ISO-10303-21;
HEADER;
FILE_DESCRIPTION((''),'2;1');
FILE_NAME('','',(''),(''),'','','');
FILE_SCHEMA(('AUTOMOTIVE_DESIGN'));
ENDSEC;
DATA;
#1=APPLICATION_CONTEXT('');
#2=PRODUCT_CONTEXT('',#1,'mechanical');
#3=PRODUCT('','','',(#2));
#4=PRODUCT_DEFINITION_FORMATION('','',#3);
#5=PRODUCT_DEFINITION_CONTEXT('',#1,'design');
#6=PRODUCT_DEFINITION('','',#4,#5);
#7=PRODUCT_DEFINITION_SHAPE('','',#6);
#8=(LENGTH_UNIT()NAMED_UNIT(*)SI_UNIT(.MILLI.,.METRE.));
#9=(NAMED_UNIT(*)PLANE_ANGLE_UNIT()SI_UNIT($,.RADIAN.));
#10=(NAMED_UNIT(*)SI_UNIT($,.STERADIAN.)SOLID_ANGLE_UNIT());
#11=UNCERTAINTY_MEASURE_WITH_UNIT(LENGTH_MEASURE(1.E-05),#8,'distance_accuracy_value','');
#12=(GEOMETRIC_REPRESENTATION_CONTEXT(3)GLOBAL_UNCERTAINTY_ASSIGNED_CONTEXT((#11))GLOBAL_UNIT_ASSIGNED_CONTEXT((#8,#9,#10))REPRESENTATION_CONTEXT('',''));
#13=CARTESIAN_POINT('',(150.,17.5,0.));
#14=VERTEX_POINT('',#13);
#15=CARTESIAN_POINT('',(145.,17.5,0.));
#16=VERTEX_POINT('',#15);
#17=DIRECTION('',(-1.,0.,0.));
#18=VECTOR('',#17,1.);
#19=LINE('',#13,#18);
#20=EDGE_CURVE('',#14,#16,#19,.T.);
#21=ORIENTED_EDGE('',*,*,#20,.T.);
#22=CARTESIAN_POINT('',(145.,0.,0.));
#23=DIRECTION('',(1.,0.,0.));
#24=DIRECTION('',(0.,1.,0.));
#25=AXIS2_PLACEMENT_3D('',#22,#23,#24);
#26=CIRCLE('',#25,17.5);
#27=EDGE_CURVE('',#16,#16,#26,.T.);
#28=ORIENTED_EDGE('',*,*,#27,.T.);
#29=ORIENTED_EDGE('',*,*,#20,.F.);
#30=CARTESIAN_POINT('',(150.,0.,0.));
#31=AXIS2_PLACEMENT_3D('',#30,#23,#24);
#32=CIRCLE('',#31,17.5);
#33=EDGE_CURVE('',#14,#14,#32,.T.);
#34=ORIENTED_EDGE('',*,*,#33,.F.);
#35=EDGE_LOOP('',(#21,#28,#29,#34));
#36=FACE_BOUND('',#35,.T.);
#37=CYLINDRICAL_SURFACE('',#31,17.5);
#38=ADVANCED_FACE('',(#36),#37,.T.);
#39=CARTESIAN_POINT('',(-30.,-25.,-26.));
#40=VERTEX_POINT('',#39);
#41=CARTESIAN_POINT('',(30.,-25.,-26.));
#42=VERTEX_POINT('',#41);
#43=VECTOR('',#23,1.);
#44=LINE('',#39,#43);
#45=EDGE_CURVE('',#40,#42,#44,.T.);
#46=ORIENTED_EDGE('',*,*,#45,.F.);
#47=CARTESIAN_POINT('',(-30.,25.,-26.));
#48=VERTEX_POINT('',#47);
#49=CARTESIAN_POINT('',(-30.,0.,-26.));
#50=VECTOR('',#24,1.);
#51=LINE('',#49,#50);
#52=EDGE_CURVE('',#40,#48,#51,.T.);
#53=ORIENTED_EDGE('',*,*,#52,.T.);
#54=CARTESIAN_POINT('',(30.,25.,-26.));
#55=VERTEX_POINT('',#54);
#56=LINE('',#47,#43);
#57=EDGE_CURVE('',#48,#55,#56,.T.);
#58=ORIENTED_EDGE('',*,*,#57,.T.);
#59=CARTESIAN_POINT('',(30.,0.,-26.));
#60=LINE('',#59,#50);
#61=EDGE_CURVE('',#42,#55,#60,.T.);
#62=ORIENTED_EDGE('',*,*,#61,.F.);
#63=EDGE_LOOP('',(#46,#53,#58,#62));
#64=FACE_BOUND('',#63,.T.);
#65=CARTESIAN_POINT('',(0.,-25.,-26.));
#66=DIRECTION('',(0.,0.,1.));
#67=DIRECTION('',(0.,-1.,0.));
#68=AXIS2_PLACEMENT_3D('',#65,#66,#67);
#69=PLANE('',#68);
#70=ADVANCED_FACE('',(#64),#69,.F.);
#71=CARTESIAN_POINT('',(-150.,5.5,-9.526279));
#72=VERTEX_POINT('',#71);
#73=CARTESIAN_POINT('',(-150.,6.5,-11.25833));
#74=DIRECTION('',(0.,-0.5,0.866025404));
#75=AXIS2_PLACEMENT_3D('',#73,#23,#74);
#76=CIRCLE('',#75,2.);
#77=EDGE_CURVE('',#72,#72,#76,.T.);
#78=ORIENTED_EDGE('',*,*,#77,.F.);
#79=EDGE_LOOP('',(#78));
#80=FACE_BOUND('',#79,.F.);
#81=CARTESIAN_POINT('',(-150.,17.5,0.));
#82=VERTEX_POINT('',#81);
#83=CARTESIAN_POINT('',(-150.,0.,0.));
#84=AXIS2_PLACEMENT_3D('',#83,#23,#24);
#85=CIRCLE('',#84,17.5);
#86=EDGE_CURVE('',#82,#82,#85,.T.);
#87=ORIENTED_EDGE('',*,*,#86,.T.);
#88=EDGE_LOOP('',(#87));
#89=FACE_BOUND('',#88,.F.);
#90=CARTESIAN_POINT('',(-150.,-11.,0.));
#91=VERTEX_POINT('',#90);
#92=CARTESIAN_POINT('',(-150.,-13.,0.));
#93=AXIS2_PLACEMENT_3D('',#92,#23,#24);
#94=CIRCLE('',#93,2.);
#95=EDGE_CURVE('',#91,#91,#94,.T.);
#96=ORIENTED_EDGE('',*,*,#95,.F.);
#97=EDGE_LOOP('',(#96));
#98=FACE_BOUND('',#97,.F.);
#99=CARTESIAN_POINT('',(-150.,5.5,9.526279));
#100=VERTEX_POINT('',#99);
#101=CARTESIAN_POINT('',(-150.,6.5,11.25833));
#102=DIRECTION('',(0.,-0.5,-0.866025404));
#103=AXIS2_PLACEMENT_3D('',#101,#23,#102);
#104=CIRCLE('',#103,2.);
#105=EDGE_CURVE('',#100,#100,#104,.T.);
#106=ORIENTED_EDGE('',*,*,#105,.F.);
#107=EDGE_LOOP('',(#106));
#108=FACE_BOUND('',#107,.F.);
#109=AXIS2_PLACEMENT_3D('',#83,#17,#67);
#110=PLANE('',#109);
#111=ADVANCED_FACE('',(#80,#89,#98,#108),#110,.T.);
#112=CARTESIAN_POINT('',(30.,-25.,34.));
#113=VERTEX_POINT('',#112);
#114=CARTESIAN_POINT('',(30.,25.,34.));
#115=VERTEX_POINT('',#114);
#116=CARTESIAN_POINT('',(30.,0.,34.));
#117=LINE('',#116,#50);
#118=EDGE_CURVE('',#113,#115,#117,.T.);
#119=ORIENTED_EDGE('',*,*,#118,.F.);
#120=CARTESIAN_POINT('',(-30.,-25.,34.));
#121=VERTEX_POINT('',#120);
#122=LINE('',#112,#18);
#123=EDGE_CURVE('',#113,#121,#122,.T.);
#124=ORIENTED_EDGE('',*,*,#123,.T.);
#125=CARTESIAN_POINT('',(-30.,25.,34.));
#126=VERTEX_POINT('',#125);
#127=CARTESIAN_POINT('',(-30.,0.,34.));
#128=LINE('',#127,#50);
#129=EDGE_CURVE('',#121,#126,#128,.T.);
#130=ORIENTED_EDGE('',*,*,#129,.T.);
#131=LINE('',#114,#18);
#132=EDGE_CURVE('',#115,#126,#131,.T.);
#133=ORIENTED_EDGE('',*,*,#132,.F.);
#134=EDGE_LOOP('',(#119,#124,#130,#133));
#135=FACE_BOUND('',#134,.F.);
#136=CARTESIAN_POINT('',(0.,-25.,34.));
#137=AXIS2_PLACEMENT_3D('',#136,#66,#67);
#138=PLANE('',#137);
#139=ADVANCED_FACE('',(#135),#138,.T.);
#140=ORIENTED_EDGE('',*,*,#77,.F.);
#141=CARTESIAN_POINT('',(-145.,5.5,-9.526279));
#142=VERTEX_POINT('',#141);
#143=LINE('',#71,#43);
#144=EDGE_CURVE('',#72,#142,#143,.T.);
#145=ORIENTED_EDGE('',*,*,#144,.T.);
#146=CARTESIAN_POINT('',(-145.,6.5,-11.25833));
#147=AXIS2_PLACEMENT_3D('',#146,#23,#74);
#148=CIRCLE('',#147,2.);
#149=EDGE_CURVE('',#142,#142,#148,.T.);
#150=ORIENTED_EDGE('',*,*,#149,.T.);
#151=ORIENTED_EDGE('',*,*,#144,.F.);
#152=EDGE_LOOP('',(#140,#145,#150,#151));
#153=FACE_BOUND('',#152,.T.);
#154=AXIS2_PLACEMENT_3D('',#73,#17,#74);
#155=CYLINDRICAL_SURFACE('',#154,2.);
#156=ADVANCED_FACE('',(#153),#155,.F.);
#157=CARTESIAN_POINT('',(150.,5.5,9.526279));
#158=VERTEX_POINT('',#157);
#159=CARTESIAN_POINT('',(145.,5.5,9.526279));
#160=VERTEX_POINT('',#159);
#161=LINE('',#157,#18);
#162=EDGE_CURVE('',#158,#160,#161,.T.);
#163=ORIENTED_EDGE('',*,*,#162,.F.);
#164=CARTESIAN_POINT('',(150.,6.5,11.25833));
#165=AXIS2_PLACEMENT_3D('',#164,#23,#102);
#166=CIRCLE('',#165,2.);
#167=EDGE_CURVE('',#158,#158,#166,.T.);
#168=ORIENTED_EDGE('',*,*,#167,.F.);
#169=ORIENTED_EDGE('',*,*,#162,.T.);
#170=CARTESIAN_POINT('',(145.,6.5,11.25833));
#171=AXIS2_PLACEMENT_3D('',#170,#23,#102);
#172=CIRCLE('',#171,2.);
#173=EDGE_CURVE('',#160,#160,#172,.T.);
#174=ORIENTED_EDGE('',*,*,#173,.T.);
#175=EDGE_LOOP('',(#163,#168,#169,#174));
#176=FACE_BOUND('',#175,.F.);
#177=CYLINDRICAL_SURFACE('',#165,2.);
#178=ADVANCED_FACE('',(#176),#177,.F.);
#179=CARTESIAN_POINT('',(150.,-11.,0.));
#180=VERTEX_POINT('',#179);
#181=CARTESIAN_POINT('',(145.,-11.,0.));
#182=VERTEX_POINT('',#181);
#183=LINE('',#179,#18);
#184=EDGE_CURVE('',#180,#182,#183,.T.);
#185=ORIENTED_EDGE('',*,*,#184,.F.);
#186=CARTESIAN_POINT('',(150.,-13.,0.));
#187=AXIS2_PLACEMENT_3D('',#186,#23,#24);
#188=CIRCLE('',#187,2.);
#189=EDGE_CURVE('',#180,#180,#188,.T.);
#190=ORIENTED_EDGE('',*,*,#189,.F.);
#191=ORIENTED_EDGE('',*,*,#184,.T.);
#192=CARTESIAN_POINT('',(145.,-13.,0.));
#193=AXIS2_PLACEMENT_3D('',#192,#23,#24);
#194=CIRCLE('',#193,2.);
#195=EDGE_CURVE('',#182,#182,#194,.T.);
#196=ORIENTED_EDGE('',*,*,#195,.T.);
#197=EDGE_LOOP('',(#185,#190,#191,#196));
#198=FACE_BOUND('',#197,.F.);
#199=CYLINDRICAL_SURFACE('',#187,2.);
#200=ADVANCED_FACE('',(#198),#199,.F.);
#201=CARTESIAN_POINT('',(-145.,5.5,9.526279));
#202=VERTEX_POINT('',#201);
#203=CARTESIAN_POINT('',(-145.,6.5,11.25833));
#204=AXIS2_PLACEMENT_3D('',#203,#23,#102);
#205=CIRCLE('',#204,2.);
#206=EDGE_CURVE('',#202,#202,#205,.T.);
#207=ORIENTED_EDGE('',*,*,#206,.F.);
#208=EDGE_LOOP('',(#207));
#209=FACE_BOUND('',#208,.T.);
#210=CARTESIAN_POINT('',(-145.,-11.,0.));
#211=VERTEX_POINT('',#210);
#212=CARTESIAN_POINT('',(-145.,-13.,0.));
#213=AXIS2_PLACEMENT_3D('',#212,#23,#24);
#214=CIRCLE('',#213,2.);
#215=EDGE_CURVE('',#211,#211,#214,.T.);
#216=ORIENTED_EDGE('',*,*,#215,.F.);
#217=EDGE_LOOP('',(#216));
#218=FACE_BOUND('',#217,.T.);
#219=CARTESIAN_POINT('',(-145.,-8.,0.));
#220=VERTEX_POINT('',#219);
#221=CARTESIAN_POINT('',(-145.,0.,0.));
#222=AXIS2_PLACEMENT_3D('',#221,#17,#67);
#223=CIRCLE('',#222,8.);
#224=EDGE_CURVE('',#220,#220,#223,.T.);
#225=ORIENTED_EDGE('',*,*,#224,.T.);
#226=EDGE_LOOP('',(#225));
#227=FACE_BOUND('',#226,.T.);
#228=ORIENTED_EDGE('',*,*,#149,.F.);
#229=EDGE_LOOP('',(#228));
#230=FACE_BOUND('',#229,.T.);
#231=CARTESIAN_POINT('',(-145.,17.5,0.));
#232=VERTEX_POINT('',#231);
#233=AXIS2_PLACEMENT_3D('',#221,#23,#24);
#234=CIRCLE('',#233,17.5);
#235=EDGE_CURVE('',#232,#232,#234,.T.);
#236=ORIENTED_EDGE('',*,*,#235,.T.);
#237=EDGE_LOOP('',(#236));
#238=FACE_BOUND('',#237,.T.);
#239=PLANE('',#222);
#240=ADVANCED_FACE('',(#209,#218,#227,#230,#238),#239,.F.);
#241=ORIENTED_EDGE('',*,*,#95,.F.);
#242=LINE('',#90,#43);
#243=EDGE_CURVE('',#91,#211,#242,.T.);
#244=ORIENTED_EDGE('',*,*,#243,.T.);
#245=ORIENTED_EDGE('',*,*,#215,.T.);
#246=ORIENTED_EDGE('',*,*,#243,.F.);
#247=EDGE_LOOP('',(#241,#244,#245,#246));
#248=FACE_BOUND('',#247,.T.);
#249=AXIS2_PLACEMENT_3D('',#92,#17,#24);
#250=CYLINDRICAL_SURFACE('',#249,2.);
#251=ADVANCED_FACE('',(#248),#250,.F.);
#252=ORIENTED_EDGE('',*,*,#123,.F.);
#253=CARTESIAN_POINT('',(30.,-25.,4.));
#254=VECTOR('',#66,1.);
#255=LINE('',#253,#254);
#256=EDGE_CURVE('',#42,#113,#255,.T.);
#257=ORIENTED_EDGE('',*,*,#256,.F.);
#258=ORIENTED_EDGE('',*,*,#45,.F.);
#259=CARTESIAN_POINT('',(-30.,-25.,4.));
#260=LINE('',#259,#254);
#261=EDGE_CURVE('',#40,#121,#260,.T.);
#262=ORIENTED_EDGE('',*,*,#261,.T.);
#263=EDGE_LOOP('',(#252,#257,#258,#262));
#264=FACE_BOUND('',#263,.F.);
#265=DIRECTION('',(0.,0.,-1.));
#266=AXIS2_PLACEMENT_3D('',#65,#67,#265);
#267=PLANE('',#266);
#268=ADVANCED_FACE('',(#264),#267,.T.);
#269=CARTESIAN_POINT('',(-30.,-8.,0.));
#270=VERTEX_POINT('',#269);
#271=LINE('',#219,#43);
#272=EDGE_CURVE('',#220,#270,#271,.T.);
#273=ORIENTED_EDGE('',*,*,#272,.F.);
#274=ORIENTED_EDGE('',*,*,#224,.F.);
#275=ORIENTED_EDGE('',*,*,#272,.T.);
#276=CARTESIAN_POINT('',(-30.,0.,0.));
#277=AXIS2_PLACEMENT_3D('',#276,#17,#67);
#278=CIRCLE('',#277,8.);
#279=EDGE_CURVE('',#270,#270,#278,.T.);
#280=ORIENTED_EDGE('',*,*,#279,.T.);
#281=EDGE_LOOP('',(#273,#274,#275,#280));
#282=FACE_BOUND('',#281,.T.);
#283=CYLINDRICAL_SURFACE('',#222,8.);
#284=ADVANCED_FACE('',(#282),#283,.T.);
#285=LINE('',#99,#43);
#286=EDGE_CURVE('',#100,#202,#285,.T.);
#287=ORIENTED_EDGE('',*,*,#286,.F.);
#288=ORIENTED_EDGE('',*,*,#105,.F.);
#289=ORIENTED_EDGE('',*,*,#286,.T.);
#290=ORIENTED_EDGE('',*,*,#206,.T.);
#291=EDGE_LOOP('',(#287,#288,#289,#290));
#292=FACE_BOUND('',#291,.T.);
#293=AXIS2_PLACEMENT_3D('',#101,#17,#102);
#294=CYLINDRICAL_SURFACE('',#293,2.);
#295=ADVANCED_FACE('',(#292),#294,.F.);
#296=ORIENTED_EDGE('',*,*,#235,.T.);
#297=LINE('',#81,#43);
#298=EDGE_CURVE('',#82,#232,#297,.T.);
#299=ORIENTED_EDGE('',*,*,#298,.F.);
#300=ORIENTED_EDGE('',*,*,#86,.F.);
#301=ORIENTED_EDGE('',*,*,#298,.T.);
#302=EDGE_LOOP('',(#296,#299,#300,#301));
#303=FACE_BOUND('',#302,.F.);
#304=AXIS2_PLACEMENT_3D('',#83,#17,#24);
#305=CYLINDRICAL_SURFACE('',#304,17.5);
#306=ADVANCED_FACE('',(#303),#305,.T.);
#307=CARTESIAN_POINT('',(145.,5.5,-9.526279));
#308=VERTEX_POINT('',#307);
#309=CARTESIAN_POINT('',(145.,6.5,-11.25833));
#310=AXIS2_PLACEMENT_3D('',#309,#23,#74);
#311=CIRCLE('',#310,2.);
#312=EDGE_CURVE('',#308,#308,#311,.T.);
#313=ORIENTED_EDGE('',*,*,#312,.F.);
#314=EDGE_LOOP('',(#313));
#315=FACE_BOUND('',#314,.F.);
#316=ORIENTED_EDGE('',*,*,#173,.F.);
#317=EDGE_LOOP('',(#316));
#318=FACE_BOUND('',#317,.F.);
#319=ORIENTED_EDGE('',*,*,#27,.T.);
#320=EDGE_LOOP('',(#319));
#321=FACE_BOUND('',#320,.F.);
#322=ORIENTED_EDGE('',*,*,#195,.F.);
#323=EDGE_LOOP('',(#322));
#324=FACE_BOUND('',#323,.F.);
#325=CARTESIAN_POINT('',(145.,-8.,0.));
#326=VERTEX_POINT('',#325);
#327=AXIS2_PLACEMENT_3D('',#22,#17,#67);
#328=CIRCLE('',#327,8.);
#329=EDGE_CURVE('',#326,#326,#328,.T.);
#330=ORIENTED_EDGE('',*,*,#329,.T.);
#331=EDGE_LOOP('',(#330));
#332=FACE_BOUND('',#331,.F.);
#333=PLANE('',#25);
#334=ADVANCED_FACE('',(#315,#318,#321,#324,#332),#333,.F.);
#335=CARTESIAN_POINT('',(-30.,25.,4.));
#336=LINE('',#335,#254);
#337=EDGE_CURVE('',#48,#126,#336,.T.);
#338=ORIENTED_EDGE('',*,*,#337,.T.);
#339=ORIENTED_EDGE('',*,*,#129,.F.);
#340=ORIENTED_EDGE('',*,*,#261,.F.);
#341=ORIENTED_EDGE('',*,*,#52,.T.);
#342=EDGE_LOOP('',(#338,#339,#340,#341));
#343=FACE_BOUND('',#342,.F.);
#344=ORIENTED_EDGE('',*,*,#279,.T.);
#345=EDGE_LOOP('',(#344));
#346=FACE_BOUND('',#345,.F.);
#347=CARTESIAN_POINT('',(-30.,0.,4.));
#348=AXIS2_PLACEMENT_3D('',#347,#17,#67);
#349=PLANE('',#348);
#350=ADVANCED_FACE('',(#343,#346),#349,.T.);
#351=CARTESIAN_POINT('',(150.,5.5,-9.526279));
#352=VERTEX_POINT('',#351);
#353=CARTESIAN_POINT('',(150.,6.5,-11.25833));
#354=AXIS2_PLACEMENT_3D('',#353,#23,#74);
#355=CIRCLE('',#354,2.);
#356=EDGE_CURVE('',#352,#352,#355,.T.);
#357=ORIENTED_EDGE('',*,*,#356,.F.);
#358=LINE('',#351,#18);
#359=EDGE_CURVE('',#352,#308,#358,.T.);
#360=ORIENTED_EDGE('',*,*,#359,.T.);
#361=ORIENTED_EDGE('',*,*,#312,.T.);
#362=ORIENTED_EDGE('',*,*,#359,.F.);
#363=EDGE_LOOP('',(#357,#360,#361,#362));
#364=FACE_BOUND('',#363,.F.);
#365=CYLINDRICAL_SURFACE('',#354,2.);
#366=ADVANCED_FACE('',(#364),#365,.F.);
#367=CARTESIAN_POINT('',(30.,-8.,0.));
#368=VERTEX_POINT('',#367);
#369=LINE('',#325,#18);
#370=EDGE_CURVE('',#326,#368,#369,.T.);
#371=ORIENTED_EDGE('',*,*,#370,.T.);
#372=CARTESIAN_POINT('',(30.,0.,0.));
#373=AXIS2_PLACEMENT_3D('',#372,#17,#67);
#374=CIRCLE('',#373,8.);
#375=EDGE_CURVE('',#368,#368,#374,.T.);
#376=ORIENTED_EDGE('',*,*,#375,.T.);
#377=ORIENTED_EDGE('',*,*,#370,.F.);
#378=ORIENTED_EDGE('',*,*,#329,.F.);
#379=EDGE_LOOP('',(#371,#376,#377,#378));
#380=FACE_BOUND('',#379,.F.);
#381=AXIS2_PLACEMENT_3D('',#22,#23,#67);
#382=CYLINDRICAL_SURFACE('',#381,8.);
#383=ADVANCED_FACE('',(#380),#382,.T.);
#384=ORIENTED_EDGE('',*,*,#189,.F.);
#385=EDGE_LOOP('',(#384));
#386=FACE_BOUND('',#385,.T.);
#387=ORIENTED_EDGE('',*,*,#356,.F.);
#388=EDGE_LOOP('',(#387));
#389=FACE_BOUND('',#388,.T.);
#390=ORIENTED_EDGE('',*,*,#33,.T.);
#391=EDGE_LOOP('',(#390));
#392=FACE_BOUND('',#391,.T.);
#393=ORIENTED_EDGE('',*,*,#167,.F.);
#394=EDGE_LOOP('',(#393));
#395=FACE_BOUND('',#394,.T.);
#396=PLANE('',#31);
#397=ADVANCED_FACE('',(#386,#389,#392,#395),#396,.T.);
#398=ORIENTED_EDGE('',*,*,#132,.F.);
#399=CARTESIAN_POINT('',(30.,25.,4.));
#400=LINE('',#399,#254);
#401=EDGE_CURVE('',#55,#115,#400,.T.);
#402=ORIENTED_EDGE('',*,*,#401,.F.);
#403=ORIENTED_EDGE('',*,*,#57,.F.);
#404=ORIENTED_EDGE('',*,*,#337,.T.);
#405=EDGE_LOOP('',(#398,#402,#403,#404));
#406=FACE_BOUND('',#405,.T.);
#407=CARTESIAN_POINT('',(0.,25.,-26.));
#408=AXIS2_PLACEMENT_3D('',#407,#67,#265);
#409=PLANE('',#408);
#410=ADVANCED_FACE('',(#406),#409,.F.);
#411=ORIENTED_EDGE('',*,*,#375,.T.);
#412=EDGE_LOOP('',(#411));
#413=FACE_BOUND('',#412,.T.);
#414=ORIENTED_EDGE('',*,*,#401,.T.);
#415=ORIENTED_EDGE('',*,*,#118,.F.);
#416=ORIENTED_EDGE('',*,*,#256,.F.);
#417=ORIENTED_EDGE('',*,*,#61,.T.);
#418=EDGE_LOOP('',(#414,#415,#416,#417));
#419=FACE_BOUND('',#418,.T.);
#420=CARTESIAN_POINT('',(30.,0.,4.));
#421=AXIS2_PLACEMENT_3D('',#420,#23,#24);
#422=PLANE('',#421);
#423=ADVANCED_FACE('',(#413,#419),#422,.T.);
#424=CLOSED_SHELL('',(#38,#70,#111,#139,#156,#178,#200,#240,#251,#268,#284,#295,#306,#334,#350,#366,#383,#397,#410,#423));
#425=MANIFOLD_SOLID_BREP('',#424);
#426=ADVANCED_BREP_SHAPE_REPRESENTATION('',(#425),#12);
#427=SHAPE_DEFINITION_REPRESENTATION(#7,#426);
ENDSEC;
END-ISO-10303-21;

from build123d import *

# Parameters (mm, degrees)
F1_R            = 17.5
F2_DEPTH        = 5
F3_W            = 50
F3_H            = 60
F4_DEPTH        = 30
F5_R            = 8
F6_DEPTH        = 115
F7_R            = 2
F8_DEPTH        = 25
F8_COPIES_COUNT = 3


# Not quite as in the source:
# - a pattern or mirror of a feature is missing from the dataset's text; its kind, count and spacing are read off the source's solid


with BuildPart() as f2:
    # F1 (on offset) → F2 (new body)
    with BuildSketch(Plane.YZ.offset(150)):
        Circle(F1_R)
    extrude(amount=-F2_DEPTH)



with BuildPart() as f4:
    # F3 (on Right) → F4 (new body)
    with BuildSketch(Plane.YZ):
        with Locations((0, 4)):
            Rectangle(F3_W, F3_H)
    extrude(amount=F4_DEPTH)


with BuildPart() as f2_1:
    add(f2.part)

    add(f4.part)  # F6 merges F4
    # F5 (on face) → F6 (join, through all)
    with BuildSketch(Plane(origin=(145, 0, 0), x_dir=(0, -1, 0), z_dir=(-1, 0, 0))):
        Circle(F5_R)
    extrude(amount=F6_DEPTH)

    # F7 (on face) → F8 (cut)
    with BuildSketch(Plane.YZ.offset(150)):
        with Locations((-13, 0)):
            Circle(F7_R)
    f8 = extrude(amount=-F8_DEPTH, mode=Mode.SUBTRACT)

    # F8_copies: F8 ×3 about axis
    f8_copies_axis = Axis((0, 0, 0), (1, 0, 0))
    for i in range(1, F8_COPIES_COUNT):
        add(f8.rotate(f8_copies_axis, i * 360 / F8_COPIES_COUNT), mode=Mode.SUBTRACT)

    # F9: F2 across plane


with BuildPart() as f2_2:
    add(f2_1.part)
    add(f2_1.part.mirror(Plane.YZ))

    # F10: F2 across plane


with BuildPart() as f2_3:
    add(f2_2.part)
    add(f2_2.part.mirror(Plane.YZ))

    # F11: F2 across plane


with BuildPart() as f2_4:
    add(f2_3.part)
    add(f2_3.part.mirror(Plane.YZ))


solid = f2_4.part
